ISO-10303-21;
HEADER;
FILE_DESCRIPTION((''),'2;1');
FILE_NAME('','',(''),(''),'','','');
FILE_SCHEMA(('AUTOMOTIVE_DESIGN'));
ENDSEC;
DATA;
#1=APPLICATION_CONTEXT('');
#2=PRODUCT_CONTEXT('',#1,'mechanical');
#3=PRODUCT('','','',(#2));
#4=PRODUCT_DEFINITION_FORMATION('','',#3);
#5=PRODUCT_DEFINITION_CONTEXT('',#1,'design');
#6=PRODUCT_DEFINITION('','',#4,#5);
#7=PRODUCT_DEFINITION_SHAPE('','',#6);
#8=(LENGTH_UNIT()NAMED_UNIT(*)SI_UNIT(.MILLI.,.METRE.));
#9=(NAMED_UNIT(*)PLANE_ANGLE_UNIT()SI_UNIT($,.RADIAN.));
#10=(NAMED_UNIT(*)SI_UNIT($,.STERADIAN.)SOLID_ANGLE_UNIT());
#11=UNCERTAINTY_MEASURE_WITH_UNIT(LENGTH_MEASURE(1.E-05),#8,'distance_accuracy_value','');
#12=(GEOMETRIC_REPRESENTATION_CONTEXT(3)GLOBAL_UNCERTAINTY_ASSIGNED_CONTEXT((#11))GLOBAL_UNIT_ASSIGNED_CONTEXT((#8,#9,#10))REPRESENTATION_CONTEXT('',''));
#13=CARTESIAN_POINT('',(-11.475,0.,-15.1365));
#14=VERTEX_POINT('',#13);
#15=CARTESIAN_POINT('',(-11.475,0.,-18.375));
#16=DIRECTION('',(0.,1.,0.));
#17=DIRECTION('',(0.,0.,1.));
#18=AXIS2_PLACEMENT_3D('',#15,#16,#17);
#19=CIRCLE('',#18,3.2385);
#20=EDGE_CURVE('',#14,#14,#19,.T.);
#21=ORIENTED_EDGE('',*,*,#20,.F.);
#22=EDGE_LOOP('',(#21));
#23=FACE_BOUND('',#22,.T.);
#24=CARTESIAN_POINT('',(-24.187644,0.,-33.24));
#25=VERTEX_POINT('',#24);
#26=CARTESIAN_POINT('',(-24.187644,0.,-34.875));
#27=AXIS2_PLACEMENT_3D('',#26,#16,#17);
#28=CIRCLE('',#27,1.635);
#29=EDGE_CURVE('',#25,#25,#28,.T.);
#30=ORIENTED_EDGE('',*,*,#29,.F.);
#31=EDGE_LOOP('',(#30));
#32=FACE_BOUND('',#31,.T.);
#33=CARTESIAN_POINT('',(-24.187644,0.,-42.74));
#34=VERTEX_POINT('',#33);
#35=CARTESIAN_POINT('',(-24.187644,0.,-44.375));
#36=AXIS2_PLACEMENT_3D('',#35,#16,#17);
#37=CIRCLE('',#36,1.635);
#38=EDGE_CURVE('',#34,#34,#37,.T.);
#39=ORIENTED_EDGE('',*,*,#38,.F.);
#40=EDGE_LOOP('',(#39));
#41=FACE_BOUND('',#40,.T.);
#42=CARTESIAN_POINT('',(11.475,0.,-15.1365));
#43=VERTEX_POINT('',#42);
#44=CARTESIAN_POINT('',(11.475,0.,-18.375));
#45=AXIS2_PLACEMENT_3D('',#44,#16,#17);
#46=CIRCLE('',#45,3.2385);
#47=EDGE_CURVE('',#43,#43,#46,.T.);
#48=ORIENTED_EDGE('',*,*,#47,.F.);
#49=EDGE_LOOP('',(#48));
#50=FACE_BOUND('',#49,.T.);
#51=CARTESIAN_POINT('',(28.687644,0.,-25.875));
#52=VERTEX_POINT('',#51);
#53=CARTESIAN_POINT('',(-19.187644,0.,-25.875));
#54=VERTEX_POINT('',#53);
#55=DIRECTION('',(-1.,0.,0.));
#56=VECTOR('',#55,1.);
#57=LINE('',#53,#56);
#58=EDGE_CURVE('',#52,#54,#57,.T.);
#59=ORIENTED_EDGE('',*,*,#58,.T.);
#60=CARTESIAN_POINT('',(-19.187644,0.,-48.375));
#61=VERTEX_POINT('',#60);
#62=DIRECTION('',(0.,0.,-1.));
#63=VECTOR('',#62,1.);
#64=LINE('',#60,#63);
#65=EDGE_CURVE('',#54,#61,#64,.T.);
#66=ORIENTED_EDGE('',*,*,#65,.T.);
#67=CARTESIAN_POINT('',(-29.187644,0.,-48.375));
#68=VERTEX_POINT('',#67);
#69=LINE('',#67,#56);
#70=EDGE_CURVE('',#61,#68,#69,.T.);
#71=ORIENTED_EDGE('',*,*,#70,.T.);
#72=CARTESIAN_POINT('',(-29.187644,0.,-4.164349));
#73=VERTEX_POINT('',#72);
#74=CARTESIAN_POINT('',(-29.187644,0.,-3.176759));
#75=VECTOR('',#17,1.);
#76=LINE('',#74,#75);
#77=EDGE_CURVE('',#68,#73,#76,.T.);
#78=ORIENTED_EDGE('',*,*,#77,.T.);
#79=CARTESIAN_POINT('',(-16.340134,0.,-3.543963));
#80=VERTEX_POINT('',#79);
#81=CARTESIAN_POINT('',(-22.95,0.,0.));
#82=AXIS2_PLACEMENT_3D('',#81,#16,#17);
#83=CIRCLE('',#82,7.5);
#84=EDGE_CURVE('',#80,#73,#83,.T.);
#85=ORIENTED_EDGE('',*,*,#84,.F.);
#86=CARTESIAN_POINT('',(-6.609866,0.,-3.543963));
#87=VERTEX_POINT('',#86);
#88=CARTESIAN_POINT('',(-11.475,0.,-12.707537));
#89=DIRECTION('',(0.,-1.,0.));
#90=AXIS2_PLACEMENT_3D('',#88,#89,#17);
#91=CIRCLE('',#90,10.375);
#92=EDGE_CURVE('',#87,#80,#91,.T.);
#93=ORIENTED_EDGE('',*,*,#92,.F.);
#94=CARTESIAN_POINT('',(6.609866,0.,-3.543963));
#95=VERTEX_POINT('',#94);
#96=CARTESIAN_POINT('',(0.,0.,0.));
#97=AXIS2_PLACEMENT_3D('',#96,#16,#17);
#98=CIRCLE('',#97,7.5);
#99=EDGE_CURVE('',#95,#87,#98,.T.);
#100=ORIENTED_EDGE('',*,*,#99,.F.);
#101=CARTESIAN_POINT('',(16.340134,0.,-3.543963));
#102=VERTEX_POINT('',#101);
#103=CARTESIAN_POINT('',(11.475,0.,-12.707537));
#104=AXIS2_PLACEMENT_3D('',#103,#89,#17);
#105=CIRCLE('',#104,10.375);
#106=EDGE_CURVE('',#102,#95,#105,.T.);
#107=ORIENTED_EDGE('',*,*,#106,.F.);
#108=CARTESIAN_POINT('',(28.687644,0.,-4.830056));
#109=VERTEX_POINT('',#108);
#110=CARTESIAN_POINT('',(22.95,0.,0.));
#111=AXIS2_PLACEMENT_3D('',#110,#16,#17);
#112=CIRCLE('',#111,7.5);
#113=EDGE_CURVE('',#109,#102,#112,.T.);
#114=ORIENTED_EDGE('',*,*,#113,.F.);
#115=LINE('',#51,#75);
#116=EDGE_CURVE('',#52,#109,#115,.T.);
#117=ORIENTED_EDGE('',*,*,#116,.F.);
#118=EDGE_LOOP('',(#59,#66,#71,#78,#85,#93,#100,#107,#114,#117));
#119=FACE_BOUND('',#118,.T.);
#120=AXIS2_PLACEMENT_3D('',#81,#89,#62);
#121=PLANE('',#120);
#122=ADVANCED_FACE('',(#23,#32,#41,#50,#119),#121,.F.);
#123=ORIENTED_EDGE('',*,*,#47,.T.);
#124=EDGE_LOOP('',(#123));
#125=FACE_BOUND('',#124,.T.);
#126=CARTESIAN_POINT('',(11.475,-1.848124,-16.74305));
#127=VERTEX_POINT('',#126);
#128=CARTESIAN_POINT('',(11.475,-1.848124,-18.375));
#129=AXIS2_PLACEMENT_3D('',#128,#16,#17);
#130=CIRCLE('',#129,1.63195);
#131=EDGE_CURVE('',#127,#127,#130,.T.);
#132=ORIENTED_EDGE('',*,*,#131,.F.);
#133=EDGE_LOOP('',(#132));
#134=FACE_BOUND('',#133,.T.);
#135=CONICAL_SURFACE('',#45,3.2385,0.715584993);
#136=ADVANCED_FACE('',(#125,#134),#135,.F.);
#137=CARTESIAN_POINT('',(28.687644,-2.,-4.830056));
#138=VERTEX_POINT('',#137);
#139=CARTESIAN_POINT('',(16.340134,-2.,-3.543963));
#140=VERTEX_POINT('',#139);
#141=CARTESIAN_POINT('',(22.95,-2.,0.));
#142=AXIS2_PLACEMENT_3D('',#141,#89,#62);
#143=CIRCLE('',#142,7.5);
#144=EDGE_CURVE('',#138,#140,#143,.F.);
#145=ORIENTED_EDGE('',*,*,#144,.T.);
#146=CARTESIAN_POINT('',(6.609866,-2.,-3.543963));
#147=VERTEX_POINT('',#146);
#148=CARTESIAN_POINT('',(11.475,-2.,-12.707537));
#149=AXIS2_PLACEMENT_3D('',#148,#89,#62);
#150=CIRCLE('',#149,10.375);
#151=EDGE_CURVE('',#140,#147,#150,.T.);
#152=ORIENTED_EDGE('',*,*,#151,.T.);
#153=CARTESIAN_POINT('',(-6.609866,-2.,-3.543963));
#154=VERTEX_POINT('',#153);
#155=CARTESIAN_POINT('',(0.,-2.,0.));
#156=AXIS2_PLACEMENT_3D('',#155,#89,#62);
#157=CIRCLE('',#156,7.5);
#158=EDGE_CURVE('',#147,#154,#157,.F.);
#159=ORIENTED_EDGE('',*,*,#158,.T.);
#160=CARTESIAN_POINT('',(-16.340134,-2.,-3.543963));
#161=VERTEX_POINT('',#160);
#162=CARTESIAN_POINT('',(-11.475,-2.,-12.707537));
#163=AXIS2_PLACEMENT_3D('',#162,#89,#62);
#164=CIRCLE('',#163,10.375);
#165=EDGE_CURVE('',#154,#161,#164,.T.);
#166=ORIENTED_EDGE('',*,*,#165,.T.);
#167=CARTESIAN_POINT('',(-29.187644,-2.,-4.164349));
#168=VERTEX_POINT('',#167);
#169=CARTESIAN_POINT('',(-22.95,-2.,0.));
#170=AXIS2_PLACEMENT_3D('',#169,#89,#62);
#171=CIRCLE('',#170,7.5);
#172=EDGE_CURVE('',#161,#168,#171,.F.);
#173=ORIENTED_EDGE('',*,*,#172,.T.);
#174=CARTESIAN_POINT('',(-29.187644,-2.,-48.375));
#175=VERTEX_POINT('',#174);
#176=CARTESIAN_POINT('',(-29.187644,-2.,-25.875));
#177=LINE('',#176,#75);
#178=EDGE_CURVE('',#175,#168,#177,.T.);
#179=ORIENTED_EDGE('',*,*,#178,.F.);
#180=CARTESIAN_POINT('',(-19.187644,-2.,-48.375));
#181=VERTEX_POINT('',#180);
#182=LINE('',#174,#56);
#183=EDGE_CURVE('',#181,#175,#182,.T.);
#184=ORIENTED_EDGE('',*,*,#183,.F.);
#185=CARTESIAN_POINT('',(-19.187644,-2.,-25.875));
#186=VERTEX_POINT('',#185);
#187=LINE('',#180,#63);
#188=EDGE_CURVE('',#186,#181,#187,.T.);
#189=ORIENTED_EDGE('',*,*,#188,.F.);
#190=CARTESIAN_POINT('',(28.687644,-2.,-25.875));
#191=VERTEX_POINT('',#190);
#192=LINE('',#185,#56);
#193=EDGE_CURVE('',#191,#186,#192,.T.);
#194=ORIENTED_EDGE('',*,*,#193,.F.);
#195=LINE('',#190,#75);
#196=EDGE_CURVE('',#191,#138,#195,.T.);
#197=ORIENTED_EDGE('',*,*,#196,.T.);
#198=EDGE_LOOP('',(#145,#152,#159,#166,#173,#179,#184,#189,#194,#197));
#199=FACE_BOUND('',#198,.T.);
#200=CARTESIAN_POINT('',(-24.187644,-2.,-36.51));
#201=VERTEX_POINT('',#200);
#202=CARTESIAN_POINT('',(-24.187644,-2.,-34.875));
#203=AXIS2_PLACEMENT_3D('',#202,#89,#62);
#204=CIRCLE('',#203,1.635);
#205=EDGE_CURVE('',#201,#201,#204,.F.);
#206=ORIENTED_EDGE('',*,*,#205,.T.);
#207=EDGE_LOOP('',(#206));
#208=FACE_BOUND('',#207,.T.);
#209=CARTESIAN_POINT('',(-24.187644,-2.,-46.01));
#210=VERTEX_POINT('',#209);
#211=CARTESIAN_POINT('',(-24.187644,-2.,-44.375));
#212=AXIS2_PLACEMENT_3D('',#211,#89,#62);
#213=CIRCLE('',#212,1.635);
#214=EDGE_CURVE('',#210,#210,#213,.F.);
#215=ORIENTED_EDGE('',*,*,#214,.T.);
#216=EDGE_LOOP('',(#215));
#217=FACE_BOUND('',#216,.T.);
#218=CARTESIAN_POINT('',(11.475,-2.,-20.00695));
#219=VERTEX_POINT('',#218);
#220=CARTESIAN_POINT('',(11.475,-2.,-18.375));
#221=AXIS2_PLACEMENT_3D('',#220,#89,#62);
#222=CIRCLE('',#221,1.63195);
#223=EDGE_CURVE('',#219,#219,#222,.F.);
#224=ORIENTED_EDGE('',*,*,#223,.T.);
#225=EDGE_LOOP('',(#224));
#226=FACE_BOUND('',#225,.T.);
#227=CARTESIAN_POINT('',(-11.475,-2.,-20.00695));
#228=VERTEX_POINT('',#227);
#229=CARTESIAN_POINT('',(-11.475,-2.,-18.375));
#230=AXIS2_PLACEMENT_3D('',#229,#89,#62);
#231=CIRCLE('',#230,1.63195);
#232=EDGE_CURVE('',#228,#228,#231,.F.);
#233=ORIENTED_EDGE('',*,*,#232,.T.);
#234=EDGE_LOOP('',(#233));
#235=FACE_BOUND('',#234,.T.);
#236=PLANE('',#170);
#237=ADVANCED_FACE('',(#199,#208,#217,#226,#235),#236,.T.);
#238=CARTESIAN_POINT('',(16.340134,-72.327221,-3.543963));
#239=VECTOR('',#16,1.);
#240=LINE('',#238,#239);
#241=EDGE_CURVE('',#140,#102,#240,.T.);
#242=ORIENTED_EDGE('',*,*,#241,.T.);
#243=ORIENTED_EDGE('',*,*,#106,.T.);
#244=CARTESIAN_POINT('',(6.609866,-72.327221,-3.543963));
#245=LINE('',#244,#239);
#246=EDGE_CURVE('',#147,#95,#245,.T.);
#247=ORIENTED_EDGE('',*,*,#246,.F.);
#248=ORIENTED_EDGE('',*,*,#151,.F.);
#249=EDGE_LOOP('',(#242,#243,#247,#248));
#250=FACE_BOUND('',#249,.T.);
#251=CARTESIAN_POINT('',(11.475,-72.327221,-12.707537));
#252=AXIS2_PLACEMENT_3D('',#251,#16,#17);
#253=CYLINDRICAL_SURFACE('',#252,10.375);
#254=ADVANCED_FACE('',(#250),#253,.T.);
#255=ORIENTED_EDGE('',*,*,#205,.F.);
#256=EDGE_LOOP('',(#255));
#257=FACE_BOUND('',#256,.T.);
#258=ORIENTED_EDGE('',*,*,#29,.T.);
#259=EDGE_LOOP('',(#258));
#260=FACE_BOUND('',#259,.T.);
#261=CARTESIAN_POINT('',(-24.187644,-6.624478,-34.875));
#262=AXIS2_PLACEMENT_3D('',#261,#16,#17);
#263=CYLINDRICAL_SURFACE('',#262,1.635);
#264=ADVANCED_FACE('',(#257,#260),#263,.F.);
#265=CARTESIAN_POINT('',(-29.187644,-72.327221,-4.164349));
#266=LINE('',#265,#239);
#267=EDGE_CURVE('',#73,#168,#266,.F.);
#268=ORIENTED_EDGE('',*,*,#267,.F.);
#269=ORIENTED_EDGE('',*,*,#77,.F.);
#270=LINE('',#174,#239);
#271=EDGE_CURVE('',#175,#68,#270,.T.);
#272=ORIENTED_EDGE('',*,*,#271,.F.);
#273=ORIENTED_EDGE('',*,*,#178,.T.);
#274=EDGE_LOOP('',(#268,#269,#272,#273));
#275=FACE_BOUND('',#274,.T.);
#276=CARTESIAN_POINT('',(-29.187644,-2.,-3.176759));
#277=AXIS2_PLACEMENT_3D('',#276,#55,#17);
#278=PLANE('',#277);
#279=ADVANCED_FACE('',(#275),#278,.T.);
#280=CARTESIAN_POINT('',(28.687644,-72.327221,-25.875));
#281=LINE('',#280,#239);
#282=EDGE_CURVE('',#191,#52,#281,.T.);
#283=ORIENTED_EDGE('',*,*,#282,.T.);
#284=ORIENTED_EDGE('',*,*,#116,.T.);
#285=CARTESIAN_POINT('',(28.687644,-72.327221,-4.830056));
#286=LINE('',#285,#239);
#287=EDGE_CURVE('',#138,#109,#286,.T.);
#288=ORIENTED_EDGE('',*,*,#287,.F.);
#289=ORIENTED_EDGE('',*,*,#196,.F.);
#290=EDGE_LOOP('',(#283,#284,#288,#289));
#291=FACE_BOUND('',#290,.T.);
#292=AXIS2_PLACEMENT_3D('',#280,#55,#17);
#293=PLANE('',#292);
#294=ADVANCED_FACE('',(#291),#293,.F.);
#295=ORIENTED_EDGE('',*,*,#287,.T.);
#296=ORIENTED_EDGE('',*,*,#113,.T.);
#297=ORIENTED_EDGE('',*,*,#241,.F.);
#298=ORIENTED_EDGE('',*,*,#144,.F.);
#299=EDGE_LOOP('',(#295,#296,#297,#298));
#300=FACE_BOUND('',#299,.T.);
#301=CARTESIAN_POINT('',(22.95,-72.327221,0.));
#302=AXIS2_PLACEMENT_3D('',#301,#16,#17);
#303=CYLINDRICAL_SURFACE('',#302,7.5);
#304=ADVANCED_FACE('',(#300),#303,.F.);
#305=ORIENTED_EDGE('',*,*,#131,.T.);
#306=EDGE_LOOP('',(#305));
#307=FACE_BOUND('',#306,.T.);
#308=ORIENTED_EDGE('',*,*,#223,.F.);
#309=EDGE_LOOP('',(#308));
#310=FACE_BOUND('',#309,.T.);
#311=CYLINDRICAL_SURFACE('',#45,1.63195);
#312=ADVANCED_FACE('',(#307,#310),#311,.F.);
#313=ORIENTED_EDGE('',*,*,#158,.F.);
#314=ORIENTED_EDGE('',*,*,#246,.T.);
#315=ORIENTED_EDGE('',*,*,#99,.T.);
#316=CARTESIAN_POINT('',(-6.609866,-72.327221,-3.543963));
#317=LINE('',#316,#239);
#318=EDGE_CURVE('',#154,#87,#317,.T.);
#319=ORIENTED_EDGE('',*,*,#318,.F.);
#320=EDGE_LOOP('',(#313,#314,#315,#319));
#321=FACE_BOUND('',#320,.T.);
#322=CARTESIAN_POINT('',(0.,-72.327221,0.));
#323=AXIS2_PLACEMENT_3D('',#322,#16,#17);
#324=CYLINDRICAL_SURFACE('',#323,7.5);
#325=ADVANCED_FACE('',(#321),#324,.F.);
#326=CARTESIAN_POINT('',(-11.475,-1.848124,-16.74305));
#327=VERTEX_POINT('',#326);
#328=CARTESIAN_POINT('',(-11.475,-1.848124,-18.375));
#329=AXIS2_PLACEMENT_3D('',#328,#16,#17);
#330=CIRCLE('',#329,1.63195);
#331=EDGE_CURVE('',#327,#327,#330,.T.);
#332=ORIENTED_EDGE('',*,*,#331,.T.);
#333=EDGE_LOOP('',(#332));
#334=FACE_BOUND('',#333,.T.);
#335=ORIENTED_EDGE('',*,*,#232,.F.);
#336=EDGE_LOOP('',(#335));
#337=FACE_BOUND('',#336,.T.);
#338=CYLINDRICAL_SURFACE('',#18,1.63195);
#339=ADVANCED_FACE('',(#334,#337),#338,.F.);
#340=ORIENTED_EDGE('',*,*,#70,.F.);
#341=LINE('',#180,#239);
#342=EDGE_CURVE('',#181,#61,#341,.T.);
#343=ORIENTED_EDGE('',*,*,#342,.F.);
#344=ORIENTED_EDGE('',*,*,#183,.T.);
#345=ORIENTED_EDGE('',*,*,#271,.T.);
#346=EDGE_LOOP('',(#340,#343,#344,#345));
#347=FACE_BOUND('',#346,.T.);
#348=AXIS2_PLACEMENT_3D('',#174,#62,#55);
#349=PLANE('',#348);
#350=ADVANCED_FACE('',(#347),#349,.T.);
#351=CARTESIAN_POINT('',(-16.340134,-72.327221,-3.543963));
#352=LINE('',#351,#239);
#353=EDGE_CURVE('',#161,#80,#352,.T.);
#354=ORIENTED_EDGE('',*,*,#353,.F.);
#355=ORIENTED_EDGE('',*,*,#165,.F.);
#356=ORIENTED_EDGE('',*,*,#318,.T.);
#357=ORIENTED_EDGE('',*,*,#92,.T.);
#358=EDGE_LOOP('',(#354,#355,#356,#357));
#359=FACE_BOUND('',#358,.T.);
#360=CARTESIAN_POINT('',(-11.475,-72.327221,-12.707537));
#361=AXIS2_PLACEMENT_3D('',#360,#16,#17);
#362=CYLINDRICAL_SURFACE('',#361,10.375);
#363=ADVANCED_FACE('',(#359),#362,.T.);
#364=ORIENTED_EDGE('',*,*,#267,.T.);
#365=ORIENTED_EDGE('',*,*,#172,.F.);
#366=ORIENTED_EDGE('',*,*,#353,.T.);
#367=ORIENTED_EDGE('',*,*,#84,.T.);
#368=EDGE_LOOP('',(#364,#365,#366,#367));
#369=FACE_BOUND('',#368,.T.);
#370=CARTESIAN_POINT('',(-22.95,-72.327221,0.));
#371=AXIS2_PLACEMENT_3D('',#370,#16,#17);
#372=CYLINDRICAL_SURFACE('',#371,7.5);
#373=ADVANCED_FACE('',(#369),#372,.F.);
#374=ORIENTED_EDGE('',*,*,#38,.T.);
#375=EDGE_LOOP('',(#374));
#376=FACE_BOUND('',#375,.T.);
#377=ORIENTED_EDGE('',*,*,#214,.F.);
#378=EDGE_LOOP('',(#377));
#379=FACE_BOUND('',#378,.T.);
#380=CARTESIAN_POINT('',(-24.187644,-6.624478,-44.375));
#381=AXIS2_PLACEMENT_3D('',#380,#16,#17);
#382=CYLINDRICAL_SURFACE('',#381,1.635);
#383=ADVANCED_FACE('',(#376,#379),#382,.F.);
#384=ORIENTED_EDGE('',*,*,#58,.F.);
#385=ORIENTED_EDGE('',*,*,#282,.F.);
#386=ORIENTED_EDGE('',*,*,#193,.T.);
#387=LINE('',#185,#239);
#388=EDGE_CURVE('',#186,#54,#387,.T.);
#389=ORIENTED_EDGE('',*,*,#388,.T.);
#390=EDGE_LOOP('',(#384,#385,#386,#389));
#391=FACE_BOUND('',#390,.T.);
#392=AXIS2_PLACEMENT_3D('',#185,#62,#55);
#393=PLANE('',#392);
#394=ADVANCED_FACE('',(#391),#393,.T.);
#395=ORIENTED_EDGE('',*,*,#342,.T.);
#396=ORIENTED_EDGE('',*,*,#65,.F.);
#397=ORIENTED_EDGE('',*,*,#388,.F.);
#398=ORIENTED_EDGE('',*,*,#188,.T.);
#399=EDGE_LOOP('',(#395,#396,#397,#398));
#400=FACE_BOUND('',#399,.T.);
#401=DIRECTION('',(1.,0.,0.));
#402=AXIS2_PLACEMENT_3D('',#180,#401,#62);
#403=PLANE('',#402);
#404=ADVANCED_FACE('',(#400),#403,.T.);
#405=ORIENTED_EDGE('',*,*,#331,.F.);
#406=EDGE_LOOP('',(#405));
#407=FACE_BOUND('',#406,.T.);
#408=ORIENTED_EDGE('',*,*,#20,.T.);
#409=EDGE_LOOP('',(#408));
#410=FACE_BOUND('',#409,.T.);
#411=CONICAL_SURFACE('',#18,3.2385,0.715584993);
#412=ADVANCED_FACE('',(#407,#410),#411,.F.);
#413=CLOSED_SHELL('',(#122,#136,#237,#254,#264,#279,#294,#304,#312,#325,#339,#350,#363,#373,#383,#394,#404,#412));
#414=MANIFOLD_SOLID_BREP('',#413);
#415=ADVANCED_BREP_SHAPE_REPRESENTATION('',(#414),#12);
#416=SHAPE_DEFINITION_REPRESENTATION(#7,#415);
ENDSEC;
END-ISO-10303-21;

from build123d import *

# Parameters (mm, degrees)
BASE_FLANGE1_START                            = -2
BASE_FLANGE1_DEPTH                            = 2
SKETCH8_R                                     = 1.635
CUT_EXTRUDE1_DEPTH                            = 2
CSK_FOR_4_FLAT_HEAD_SOCKET_CAP_SCREW1_A_COUNT = 2
CSK_FOR_4_FLAT_HEAD_SOCKET_CAP_SCREW1_A_PITCH = 22.95
CUT_EXTRUDE2_DEPTH                            = 2


# Read off the part's stored shape, not the designer's step: Base-Flange1
with BuildPart() as part:
    # Base-Flange1 outline → Base-Flange1 (new body)
    with BuildSketch(Plane(origin=(0, 0, 0), x_dir=(1, 0, 0), z_dir=(0, 1, 0)).offset(BASE_FLANGE1_START)):
        with BuildLine():
            ThreePointArc((-29.187643745, 3.176759435), (-22.95, 7), (-16.712356255, 3.176759435))
            ThreePointArc((-16.712356255, 3.176759435), (-11.475, 1.832537182), (-6.237643745, 3.176759435))
            ThreePointArc((-6.237643745, 3.176759435), (0, 7), (6.237643745, 3.176759435))
            ThreePointArc((6.237643745, 3.176759435), (11.475, 1.832537182), (16.712356255, 3.176759435))
            ThreePointArc((16.712356255, 3.176759435), (22.95, 7), (29.187643745, 3.176759435))
            Line((29.187643745, 3.176759435), (29.187643745, 25.875))
            Line((29.187643745, 25.875), (-19.187643745, 25.875))
            Line((-19.187643745, 25.875), (-19.187643745, 48.375))
            Line((-19.187643745, 48.375), (-29.187643745, 48.375))
            Line((-29.187643745, 48.375), (-29.187643745, 3.176759435))
        make_face()
    extrude(amount=BASE_FLANGE1_DEPTH)

    # Sketch8 → Cut-Extrude1 (cut)
    with BuildSketch(Plane(origin=(0, 0, 0), x_dir=(1, 0, 0), z_dir=(0, 1, 0))):
        with Locations(Location((-24.187643745, 44.375, 0), (0, 0, 270))):
            Circle(SKETCH8_R)
        with Locations(Location((-24.187643745, 34.875, 0), (0, 0, 270))):
            Circle(SKETCH8_R)
    extrude(amount=-CUT_EXTRUDE1_DEPTH, mode=Mode.SUBTRACT)

    # Sketch10 → CSK for #4 Flat Head Socket Cap Screw1 (revolve, cut)
    with BuildSketch(Plane(origin=(11.475, 0, -18.375), x_dir=(0, 0, 1), z_dir=(1, 0, 0))):
        Polygon((0, 0), (0, 2.980574487), (1.63195, 2), (1.63195, 1.848124365), (3.2385, 0), align=None)
    csk_for_4_flat_head_socket_cap_screw1 = revolve(axis=Axis((11.475, 6.35, -18.375), (0, -1, 0)), mode=Mode.SUBTRACT)

    # CSK for #4 Flat Head Socket Cap Screw1 a: CSK for #4 Flat Head Socket Cap Screw1 ×2
    with Locations(*[(-i * CSK_FOR_4_FLAT_HEAD_SOCKET_CAP_SCREW1_A_PITCH, 0, 0) for i in range(1, CSK_FOR_4_FLAT_HEAD_SOCKET_CAP_SCREW1_A_COUNT)]):
        add(csk_for_4_flat_head_socket_cap_screw1, mode=Mode.SUBTRACT)

    # Sketch12 → Cut-Extrude2 (cut)
    with BuildSketch(Plane(origin=(0, 0, 0), x_dir=(1, 0, 0), z_dir=(0, 1, 0))):
        with BuildLine():
            Line((-29.633189727, 3.403670823), (-29.633189727, -1.121913875))
            Line((-29.633189727, -1.121913875), (35.30589457, -1.121913875))
            Line((35.30589457, -1.121913875), (35.30589457, 25.875))
            Line((35.30589457, 25.875), (28.687643745, 25.875))
            Line((28.687643745, 25.875), (28.687643745, 4.83005634))
            ThreePointArc((28.687643745, 4.83005634), (22.173017349, 7.459644627), (16.340134062, 3.543962794))
            ThreePointArc((16.340134062, 3.543962794), (11.475, 2.332537182), (6.609865938, 3.543962794))
            ThreePointArc((6.609865938, 3.543962794), (0, 7.5), (-6.609865938, 3.543962794))
            ThreePointArc((-6.609865938, 3.543962794), (-11.475, 2.332537182), (-16.340134062, 3.543962794))
            ThreePointArc((-16.340134062, 3.543962794), (-23.029148934, 7.499582351), (-29.633189727, 3.403670823))
        make_face()
    extrude(amount=-CUT_EXTRUDE2_DEPTH, mode=Mode.SUBTRACT)


solid = part.part
